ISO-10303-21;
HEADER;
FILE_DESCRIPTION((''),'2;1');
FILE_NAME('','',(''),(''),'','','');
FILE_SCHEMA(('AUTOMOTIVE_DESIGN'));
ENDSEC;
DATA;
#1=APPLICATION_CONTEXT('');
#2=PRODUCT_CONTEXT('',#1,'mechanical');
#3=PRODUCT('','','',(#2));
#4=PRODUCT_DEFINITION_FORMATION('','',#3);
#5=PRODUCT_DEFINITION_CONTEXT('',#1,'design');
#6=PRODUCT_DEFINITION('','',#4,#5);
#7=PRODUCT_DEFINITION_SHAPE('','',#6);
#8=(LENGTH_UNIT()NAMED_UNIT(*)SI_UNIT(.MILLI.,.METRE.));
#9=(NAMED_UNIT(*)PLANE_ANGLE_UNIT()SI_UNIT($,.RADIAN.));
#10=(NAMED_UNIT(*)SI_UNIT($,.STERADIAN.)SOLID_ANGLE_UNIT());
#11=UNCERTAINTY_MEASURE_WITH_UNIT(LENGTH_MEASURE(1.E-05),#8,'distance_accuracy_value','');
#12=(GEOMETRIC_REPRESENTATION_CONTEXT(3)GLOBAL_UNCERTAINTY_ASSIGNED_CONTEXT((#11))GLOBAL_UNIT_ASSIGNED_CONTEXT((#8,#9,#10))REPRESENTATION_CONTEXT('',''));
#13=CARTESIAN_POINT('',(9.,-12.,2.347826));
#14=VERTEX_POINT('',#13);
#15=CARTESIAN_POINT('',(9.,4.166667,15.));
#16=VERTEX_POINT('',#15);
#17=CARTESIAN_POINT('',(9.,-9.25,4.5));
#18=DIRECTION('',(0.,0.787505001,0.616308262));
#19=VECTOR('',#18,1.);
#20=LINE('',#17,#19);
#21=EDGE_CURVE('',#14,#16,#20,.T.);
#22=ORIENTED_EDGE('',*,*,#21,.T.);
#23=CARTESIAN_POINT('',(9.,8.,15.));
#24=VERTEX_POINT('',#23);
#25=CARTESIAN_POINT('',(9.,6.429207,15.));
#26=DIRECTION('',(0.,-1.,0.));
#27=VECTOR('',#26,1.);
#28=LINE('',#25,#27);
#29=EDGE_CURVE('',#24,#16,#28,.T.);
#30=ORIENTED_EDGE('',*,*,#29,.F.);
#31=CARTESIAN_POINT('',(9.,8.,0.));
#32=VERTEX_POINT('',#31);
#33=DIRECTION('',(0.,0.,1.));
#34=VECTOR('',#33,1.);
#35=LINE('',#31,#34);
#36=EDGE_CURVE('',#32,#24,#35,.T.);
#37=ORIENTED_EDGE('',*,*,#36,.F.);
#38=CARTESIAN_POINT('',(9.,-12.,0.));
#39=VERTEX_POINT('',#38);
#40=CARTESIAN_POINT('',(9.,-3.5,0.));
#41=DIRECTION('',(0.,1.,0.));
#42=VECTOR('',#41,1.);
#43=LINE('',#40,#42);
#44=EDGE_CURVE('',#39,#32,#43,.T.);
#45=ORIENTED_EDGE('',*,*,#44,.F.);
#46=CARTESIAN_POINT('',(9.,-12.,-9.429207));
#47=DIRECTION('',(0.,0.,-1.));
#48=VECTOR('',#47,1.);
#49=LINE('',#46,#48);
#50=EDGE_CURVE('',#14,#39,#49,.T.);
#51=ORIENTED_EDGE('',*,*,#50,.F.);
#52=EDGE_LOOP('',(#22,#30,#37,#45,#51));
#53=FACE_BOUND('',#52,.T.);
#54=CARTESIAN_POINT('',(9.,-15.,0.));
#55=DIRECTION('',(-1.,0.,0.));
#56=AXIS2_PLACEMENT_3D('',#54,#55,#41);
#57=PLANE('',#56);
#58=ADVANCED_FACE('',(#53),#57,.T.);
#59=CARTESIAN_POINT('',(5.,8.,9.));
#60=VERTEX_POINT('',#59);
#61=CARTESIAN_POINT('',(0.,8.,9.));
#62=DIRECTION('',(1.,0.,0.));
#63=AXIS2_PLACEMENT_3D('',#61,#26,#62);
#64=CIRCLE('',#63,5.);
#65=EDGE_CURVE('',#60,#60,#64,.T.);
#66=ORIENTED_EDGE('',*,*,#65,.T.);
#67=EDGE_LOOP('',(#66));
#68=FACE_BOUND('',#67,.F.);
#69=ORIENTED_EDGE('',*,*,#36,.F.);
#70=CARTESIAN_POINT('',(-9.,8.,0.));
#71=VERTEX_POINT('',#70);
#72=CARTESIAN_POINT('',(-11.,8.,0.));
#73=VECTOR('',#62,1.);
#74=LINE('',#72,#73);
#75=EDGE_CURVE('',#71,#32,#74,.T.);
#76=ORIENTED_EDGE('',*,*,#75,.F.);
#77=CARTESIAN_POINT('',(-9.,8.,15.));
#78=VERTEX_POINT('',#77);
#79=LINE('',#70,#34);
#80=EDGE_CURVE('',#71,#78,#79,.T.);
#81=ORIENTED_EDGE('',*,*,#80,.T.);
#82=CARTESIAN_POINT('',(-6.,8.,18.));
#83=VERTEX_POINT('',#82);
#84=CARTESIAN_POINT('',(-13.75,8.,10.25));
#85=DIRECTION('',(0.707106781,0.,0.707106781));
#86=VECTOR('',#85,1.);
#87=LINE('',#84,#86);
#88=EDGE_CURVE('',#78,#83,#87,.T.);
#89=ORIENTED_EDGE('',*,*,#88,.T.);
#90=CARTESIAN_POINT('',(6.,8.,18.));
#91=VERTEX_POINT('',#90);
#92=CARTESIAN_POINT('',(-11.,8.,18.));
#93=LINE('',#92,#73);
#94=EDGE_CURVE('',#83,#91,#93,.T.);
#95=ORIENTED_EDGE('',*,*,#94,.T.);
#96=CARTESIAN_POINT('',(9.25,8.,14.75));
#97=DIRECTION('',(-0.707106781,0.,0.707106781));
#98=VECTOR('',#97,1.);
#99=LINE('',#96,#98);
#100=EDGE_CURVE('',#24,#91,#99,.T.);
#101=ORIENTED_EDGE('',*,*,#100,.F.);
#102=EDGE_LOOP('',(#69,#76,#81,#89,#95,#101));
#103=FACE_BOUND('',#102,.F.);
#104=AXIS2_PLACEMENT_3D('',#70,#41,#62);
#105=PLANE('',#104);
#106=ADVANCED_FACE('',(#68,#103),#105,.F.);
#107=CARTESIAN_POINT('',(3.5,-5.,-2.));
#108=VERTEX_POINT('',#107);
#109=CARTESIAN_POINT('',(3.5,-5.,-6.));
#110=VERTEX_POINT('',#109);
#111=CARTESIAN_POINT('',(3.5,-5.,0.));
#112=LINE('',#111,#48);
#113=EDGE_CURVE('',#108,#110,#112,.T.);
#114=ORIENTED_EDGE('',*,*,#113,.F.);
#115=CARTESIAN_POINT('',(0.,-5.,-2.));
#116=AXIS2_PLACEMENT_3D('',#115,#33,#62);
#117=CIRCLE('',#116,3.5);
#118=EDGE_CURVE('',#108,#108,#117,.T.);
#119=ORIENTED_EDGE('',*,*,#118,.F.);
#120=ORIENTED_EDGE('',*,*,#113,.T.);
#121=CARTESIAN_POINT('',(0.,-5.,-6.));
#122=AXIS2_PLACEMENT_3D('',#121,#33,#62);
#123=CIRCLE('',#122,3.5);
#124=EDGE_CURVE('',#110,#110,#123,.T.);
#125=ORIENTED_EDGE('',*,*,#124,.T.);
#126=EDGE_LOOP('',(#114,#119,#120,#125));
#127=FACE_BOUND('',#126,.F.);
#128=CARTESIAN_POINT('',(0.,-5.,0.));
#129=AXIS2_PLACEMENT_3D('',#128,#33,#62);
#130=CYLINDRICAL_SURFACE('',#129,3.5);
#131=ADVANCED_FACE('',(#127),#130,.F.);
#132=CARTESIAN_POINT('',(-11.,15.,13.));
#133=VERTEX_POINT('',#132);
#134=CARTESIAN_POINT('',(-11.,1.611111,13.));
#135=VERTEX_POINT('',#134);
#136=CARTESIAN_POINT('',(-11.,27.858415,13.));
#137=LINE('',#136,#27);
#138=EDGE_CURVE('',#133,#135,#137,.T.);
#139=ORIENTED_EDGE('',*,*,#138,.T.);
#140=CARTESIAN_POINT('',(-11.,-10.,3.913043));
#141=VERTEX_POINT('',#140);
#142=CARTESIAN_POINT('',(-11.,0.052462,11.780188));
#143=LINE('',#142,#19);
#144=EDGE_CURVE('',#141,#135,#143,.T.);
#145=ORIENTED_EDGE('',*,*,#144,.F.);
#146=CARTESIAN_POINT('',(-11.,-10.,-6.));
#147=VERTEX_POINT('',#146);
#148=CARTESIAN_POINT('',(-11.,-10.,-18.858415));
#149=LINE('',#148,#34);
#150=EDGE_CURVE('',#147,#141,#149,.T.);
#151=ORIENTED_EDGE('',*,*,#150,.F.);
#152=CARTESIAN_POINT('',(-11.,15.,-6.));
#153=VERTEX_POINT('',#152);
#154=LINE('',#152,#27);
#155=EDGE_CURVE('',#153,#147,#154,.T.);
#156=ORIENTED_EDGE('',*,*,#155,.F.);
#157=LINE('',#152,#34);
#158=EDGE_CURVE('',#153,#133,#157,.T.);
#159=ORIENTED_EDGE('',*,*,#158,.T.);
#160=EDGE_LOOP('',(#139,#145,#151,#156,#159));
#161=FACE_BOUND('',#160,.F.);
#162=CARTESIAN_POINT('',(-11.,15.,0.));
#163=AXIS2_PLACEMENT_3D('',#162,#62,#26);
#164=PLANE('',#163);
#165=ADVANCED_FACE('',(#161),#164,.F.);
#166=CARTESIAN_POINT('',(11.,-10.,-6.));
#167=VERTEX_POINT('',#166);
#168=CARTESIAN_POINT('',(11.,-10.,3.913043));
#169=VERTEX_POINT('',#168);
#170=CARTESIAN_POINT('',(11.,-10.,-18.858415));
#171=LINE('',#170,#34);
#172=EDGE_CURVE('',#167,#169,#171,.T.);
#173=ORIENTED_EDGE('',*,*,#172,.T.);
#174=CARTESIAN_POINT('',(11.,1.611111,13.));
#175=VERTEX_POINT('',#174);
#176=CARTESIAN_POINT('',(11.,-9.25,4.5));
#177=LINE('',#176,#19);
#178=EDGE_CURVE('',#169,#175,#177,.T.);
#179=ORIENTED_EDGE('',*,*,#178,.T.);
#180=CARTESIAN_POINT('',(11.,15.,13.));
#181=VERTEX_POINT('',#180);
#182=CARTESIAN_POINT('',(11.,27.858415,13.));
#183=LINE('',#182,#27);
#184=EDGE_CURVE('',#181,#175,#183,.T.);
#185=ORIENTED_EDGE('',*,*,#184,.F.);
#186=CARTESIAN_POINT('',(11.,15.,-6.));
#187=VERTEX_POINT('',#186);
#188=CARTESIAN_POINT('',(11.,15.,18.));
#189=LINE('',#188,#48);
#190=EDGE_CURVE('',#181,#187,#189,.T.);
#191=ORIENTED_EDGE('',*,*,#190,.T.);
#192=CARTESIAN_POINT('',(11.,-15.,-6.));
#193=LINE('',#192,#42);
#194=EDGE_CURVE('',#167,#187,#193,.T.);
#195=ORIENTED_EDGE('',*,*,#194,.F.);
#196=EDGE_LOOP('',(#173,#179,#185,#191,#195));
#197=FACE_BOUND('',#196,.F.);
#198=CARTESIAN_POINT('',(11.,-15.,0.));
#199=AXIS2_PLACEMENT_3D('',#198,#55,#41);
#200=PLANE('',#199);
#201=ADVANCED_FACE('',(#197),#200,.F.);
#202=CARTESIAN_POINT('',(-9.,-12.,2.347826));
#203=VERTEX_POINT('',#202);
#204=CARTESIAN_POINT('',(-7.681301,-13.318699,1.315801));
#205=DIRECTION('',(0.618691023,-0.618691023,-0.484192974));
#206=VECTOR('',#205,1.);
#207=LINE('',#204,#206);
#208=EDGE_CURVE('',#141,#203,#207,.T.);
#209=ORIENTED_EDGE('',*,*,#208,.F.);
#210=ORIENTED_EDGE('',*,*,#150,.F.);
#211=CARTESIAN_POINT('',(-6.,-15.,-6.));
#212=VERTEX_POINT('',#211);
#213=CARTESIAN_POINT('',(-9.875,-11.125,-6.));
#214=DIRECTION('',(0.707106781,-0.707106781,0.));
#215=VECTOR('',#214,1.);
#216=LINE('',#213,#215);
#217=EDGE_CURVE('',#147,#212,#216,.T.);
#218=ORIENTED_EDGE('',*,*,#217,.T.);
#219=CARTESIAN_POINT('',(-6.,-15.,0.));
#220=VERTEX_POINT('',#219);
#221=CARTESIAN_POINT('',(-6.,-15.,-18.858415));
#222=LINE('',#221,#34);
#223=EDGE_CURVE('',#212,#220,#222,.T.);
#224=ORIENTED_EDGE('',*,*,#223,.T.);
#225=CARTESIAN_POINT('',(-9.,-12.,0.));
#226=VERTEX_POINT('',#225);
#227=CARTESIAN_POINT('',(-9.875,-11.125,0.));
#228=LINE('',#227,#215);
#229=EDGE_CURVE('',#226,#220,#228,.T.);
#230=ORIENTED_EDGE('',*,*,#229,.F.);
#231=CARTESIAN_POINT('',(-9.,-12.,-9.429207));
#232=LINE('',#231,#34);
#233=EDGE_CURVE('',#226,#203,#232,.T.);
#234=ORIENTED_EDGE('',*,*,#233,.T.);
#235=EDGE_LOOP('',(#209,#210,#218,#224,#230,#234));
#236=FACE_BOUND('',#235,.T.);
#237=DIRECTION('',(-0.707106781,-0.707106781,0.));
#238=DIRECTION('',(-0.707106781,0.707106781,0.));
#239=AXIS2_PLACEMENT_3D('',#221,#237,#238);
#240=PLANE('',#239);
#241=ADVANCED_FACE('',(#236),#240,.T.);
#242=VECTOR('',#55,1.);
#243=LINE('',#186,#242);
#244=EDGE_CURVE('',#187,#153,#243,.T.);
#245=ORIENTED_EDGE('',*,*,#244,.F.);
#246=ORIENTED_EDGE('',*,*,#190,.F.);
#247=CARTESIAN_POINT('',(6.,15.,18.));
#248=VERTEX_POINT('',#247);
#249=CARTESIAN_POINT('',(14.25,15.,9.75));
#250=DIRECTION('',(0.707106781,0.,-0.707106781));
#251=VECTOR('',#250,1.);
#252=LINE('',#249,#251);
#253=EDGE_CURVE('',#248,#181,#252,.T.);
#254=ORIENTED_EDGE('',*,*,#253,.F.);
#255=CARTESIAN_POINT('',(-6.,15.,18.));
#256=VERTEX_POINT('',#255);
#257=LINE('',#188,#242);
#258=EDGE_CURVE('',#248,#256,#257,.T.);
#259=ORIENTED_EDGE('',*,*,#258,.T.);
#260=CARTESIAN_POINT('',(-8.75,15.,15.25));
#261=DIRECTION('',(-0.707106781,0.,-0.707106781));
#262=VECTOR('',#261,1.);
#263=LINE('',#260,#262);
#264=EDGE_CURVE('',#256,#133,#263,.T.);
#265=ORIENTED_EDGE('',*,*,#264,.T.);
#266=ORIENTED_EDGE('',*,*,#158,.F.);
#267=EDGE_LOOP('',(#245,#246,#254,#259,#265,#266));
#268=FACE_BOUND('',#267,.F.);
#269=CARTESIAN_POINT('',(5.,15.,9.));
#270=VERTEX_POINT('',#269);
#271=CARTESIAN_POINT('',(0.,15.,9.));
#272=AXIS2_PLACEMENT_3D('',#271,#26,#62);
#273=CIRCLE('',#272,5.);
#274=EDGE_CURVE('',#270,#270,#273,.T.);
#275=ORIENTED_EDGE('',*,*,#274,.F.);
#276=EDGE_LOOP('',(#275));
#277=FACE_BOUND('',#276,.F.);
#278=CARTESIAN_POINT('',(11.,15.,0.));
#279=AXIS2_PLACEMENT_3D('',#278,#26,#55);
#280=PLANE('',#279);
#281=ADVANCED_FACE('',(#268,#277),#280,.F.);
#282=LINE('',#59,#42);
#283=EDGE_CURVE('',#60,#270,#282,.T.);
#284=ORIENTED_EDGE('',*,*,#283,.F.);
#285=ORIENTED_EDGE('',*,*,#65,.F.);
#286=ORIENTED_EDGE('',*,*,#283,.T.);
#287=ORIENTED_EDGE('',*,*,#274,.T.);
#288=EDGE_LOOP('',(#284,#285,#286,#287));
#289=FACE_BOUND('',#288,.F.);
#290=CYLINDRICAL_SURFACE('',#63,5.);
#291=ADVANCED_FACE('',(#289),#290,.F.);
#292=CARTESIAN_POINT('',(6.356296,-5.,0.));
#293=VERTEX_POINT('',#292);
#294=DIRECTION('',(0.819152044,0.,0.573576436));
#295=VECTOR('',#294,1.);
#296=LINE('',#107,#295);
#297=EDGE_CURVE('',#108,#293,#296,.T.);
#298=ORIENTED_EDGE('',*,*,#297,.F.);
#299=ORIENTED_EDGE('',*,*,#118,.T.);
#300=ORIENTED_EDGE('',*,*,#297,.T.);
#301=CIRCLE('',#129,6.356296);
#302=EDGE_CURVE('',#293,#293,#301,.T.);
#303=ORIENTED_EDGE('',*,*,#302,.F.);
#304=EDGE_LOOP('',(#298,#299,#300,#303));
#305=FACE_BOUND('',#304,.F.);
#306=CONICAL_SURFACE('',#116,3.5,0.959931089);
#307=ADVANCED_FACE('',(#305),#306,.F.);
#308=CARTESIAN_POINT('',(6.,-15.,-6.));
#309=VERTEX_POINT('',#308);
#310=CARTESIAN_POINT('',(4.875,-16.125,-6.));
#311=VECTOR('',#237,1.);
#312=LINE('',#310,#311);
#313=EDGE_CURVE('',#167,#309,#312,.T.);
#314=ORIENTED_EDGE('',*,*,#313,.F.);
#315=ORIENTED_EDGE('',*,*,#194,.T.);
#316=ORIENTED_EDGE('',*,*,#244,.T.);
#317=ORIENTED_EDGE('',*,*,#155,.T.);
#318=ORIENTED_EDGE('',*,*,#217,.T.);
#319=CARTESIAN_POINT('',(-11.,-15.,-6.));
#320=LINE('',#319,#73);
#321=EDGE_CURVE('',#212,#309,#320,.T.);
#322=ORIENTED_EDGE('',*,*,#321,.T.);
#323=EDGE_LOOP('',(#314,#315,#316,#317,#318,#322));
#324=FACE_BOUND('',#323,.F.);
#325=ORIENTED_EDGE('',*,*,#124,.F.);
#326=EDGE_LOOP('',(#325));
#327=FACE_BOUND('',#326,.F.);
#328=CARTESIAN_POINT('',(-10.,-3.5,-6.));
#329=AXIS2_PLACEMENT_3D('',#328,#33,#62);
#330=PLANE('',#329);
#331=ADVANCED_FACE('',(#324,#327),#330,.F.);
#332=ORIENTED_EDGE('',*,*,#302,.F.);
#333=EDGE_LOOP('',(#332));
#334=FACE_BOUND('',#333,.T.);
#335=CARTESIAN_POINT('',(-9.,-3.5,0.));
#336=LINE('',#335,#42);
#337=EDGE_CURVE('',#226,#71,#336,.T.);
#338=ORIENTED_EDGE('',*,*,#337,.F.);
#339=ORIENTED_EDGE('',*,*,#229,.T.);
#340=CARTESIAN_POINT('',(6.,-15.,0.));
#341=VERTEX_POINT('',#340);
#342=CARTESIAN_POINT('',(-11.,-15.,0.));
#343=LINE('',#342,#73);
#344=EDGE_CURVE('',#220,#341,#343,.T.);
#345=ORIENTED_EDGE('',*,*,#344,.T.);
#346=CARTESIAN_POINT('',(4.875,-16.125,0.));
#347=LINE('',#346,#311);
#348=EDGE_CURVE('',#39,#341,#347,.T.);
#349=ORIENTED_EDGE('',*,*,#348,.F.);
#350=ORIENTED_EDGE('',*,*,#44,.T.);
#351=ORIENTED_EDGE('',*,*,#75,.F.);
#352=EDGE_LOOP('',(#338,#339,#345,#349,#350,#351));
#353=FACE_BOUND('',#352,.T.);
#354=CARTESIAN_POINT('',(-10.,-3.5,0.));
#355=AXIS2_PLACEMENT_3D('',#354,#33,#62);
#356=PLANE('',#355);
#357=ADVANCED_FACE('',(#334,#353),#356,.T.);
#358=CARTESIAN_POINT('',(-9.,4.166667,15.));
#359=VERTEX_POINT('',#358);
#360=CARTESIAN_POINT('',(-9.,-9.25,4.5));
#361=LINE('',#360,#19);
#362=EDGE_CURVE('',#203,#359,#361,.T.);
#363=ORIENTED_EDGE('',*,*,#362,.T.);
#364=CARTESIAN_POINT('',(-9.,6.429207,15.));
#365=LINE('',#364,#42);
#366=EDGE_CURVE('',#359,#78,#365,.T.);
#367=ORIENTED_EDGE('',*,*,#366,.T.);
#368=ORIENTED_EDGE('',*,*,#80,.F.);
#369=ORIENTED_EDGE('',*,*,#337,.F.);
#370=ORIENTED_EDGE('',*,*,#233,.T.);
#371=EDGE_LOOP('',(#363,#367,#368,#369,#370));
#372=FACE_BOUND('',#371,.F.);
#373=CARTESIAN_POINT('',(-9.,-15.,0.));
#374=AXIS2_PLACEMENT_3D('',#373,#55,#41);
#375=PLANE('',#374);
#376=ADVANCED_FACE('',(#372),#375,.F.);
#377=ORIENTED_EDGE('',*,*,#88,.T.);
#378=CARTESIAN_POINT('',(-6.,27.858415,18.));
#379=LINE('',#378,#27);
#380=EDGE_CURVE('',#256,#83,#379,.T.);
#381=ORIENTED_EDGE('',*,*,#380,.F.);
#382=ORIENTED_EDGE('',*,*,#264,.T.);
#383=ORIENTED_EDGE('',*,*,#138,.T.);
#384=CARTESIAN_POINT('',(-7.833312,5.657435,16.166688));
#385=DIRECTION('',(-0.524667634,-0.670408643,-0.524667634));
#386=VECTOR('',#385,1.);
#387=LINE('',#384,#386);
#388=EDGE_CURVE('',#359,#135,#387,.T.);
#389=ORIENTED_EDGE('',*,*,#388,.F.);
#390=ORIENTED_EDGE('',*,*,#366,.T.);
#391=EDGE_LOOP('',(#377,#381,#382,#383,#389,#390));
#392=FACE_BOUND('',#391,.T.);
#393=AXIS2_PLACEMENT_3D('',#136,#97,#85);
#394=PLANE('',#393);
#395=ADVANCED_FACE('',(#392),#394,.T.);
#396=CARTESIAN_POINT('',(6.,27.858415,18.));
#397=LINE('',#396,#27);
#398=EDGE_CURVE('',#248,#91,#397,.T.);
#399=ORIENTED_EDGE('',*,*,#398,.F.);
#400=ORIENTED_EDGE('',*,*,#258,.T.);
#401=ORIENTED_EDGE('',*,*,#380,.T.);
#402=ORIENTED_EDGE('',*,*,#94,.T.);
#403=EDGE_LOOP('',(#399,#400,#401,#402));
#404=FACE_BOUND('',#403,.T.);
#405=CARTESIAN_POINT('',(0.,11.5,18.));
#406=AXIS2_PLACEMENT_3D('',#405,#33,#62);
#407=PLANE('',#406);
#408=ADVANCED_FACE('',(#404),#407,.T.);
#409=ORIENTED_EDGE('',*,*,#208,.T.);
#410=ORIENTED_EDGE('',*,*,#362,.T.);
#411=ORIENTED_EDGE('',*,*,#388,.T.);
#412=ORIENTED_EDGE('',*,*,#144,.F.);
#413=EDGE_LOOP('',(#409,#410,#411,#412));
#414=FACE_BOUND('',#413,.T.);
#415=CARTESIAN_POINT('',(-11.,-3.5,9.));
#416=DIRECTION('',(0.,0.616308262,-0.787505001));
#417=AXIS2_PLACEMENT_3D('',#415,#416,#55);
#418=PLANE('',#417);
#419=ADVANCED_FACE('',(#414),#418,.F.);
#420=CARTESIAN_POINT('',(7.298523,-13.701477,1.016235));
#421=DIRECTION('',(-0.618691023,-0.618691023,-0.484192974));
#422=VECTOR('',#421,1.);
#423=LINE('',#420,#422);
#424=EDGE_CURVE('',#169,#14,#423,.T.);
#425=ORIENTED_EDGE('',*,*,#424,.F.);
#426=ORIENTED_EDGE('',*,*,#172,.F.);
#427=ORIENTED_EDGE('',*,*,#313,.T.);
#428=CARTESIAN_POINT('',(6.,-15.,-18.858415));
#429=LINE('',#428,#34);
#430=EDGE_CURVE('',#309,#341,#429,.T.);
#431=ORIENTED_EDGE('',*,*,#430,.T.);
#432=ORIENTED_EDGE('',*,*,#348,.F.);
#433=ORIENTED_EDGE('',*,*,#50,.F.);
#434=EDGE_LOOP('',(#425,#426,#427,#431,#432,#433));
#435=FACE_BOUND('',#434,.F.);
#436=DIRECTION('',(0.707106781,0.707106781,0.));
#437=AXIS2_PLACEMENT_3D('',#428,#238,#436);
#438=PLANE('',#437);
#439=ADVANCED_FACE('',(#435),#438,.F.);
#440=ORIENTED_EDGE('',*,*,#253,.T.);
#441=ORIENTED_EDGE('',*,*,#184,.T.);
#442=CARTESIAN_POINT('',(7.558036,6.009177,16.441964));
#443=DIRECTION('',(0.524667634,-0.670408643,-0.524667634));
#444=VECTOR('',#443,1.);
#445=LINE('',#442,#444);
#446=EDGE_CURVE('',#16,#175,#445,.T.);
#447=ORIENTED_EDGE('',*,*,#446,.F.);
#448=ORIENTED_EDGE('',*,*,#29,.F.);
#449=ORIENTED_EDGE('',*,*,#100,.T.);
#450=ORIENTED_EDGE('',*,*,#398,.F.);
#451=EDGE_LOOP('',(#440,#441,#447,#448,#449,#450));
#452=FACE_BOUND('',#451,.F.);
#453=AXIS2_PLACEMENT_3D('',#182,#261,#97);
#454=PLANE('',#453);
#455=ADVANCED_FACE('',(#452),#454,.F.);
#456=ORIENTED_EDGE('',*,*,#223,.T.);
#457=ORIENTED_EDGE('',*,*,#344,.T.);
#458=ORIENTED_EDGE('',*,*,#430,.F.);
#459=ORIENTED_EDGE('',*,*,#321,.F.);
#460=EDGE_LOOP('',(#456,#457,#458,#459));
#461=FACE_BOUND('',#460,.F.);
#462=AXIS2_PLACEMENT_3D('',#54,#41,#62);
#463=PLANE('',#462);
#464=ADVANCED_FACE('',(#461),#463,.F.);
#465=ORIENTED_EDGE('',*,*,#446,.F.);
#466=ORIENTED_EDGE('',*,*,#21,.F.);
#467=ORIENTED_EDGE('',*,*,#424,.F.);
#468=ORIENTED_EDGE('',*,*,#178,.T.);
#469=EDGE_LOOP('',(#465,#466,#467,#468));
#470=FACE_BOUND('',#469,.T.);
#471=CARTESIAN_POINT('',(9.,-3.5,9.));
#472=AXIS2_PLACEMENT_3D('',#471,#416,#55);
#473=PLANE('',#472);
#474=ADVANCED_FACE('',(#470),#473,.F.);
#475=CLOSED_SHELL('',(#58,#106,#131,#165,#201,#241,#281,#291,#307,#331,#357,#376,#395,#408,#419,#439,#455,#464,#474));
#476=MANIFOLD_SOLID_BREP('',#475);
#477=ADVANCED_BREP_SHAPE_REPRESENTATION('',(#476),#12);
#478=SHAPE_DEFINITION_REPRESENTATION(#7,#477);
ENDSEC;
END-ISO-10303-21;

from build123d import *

# Parameters (mm, degrees)
F0_W        = 2
F0_H        = 23
F0_W_2      = 18
F0_R        = 3.5
F1_DEPTH    = 6
F2_DEPTH    = 18
F3_R        = 5
F4_DEPTH    = 25
F5_SIZE2    = 23
F5_SIZE     = 18
F6_T1_DEPTH = 31.7168298797
F6_T3_DEPTH = 32.7168298797
F7_SIZE2    = 2.8562960135
F7_SIZE     = 2


# Not quite as in the source:
# - a fillet or chamfer that OpenCascade refuses, or shapes differently, is made with other operations: its cross-section is extruded or revolved along the edge and cut away or added


with BuildPart() as f1:
    # F0 (on Top) → F1 (new body)
    with BuildSketch(Plane.XY):
        with Locations((-10, -3.5)):
            Rectangle(F0_W, F0_H)
        with Locations((0, -3.5)):
            Rectangle(F0_W_2, F0_H)
        with Locations((0, -5)):
            Circle(F0_R, mode=Mode.SUBTRACT)
        with Locations((10, -3.5)):
            Rectangle(F0_W, F0_H)
        Polygon((9, 8), (11, 8), (11, 15), (-11, 15), (-11, 8), (-9, 8), align=None)
    extrude(amount=-F1_DEPTH)

    # F0 (on Top) → F2 (join)
    with BuildSketch(Plane.XY):
        Polygon((9, 8), (11, 8), (11, 15), (-11, 15), (-11, 8), (-9, 8), align=None)
        with Locations((-10, -3.5)):
            Rectangle(F0_W, F0_H)
        with Locations((10, -3.5)):
            Rectangle(F0_W, F0_H)
    extrude(amount=F2_DEPTH)

    # F3 (on face) → F4 (cut)
    with BuildSketch(Plane.XZ.offset(-8)):
        with Locations((0, 9)):
            Circle(F3_R)
    extrude(amount=-F4_DEPTH, mode=Mode.SUBTRACT)

    # F5
    f5_edges = [f1.edges().sort_by_distance(p)[0] for p in [
        (-10, -15, 18),
        (10, -15, 18),
    ]]
    f5_side = f1.faces().sort_by_distance((0, -15, -5.674424))[0]
    chamfer(f5_edges, length=F5_SIZE, length2=F5_SIZE2, reference=f5_side)

    # F6: chamfer of 5 on 4 edges, made by hand

    # F6_s2 → F6_t1 (cut)
    with BuildSketch(Plane.XY.offset(-18.8584149398)):
        Polygon((6, -15), (11, -10), (11, -15), align=None)
        Polygon((-6, -15), (-11, -10), (-11, -15), align=None)
    extrude(amount=F6_T1_DEPTH, mode=Mode.SUBTRACT)

    # F6_s4 → F6_t3 (cut)
    with BuildSketch(Plane.XZ.offset(-27.8584149398)):
        Polygon((11, 13), (6, 18), (11, 18), align=None)
        Polygon((-11, 13), (-6, 18), (-11, 18), align=None)
    extrude(amount=F6_T3_DEPTH, mode=Mode.SUBTRACT)

    # F7
    f7_edges = [f1.edges().sort_by_distance(p)[0] for p in [
        (-3.5, -5, 0),
    ]]
    f7_side = f1.faces().sort_by_distance((-3.5, -5, -3))[0]
    chamfer(f7_edges, length=F7_SIZE, length2=F7_SIZE2, reference=f7_side)


solid = f1.part
